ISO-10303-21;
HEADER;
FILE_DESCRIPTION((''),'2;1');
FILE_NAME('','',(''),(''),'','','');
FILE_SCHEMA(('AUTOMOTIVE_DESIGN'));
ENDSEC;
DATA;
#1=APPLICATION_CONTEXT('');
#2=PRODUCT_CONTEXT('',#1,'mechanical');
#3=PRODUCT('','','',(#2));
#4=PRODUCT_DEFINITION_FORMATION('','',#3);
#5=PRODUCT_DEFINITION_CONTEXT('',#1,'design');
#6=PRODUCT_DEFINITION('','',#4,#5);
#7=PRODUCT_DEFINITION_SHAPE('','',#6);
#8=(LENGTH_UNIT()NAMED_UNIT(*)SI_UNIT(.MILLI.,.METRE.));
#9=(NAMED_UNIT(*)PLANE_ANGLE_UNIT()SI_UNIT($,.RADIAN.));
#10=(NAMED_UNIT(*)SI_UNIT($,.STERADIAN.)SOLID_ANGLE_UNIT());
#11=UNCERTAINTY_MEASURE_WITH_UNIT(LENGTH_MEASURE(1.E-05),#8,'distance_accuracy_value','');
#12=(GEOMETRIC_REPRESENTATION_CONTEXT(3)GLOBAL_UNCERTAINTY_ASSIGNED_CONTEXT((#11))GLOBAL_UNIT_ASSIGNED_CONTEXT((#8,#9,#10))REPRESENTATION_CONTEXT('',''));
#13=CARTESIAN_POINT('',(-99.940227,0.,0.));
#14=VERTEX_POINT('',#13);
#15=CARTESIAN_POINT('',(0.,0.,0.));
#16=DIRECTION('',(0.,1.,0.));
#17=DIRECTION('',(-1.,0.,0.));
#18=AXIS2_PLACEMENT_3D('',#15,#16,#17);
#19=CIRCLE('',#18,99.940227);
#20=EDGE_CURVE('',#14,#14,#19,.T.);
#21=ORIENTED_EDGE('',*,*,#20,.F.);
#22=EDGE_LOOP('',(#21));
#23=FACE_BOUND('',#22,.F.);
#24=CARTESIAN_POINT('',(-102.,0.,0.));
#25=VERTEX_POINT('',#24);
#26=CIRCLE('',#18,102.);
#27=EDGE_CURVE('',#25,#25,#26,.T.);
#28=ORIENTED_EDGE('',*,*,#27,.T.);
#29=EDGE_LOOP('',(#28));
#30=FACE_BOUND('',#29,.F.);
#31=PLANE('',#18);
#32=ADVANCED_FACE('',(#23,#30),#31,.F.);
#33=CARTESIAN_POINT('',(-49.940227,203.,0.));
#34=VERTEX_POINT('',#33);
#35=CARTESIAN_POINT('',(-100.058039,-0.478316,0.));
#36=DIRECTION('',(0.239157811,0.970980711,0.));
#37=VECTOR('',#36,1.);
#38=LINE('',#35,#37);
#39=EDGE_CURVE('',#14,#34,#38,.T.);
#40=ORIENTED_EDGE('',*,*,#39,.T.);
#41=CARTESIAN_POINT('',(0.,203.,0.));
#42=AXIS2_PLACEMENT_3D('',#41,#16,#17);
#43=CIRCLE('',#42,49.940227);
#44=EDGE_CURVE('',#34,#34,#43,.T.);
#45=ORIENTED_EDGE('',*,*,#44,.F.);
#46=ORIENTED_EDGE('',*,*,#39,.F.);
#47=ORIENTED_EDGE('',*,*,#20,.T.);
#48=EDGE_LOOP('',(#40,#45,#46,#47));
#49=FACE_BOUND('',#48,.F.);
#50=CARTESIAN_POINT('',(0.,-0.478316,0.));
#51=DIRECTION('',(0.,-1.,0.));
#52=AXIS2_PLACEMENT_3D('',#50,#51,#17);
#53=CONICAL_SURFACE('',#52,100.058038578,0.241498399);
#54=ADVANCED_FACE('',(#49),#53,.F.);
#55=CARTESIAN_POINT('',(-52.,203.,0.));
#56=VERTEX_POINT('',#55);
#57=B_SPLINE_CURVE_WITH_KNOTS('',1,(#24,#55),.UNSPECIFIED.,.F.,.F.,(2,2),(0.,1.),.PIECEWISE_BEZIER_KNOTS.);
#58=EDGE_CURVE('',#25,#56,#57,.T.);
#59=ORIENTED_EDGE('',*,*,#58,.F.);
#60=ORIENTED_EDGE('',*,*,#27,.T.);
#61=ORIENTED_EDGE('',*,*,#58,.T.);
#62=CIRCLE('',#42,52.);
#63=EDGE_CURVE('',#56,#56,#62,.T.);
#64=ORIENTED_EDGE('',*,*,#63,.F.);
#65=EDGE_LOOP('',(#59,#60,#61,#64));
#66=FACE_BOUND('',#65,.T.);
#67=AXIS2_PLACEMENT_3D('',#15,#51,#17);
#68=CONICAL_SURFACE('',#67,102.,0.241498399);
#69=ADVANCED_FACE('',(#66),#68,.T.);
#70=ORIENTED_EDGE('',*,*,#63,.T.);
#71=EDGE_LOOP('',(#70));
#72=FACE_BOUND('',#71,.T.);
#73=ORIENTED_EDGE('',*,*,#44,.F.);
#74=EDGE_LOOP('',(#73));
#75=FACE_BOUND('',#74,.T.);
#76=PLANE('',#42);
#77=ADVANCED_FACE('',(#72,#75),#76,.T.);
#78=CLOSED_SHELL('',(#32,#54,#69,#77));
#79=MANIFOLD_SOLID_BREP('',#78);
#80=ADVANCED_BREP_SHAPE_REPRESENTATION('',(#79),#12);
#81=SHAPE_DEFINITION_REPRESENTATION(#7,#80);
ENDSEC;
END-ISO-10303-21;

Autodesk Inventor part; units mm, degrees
ref_plane "YZ Plane" through (0, 0, 0) normal (1, 0, 0) x (0, 1, 0)
ref_plane "XY Plane" through (0, 0, 0) normal (0, 0, 1) x (1, 0, 0)
sketch "Szkic6" plane through (0, 0, 0) normal (0, 1, 0) x (-1, 0, 0)
  circle A0 centre (0, 0) radius 102
  dimension "d33" = 204
ref_plane "Płaszczyzna konstrukcyjna1" through (0, 203, 0) normal (0, 1, 0) x (-1, 0, 0)
sketch "Szkic7" plane through (0, 203, 0) normal (0, 1, 0) x (-1, 0, 0)
  circle A0 centre (0, 0) radius 52
  dimension "d35" = 104
loft "Wyciągnięcie złożone1" add profiles "Szkic6", "Szkic7"
shell "Skorupa1" thickness 2 removed faces 2 at (-18.5271, 203, 25.061) at (-23.2432, 0, 54.3964)
equation "\"d33\" = OD1"
equation "\"d35\" = OD2"
equation "\"d52\" = THK"
equation "\"SzerokośćGięciaPodcięcia\" = Grubość"
equation "\"RozmiarPodcięciaNarożnika\" = 4 * Grubość"
equation "\"PromieńPrzejścia\" = PromieńGięcia"
equation "\"Rozmiar_promienia_Jacobiego\" = PromieńGięcia"
equation "\"Wielk_odstępu\" = Grubość"
equation "\"d2\" = PromieńGięcia"
equation "\"d23\" = PromieńGięcia"
equation "\"OD1\" = 204"
equation "\"OD2\" = 104"
equation "\"L\" = 203"
equation "\"THK\" = 2"
equation "\"d34\" = L"
equation "\"Grubość\" = 1.5"
equation "\"PromieńGięcia\" = 3"
properties part number "Redukcja symetryczna Ø204x104x2 L=203" material "304"
